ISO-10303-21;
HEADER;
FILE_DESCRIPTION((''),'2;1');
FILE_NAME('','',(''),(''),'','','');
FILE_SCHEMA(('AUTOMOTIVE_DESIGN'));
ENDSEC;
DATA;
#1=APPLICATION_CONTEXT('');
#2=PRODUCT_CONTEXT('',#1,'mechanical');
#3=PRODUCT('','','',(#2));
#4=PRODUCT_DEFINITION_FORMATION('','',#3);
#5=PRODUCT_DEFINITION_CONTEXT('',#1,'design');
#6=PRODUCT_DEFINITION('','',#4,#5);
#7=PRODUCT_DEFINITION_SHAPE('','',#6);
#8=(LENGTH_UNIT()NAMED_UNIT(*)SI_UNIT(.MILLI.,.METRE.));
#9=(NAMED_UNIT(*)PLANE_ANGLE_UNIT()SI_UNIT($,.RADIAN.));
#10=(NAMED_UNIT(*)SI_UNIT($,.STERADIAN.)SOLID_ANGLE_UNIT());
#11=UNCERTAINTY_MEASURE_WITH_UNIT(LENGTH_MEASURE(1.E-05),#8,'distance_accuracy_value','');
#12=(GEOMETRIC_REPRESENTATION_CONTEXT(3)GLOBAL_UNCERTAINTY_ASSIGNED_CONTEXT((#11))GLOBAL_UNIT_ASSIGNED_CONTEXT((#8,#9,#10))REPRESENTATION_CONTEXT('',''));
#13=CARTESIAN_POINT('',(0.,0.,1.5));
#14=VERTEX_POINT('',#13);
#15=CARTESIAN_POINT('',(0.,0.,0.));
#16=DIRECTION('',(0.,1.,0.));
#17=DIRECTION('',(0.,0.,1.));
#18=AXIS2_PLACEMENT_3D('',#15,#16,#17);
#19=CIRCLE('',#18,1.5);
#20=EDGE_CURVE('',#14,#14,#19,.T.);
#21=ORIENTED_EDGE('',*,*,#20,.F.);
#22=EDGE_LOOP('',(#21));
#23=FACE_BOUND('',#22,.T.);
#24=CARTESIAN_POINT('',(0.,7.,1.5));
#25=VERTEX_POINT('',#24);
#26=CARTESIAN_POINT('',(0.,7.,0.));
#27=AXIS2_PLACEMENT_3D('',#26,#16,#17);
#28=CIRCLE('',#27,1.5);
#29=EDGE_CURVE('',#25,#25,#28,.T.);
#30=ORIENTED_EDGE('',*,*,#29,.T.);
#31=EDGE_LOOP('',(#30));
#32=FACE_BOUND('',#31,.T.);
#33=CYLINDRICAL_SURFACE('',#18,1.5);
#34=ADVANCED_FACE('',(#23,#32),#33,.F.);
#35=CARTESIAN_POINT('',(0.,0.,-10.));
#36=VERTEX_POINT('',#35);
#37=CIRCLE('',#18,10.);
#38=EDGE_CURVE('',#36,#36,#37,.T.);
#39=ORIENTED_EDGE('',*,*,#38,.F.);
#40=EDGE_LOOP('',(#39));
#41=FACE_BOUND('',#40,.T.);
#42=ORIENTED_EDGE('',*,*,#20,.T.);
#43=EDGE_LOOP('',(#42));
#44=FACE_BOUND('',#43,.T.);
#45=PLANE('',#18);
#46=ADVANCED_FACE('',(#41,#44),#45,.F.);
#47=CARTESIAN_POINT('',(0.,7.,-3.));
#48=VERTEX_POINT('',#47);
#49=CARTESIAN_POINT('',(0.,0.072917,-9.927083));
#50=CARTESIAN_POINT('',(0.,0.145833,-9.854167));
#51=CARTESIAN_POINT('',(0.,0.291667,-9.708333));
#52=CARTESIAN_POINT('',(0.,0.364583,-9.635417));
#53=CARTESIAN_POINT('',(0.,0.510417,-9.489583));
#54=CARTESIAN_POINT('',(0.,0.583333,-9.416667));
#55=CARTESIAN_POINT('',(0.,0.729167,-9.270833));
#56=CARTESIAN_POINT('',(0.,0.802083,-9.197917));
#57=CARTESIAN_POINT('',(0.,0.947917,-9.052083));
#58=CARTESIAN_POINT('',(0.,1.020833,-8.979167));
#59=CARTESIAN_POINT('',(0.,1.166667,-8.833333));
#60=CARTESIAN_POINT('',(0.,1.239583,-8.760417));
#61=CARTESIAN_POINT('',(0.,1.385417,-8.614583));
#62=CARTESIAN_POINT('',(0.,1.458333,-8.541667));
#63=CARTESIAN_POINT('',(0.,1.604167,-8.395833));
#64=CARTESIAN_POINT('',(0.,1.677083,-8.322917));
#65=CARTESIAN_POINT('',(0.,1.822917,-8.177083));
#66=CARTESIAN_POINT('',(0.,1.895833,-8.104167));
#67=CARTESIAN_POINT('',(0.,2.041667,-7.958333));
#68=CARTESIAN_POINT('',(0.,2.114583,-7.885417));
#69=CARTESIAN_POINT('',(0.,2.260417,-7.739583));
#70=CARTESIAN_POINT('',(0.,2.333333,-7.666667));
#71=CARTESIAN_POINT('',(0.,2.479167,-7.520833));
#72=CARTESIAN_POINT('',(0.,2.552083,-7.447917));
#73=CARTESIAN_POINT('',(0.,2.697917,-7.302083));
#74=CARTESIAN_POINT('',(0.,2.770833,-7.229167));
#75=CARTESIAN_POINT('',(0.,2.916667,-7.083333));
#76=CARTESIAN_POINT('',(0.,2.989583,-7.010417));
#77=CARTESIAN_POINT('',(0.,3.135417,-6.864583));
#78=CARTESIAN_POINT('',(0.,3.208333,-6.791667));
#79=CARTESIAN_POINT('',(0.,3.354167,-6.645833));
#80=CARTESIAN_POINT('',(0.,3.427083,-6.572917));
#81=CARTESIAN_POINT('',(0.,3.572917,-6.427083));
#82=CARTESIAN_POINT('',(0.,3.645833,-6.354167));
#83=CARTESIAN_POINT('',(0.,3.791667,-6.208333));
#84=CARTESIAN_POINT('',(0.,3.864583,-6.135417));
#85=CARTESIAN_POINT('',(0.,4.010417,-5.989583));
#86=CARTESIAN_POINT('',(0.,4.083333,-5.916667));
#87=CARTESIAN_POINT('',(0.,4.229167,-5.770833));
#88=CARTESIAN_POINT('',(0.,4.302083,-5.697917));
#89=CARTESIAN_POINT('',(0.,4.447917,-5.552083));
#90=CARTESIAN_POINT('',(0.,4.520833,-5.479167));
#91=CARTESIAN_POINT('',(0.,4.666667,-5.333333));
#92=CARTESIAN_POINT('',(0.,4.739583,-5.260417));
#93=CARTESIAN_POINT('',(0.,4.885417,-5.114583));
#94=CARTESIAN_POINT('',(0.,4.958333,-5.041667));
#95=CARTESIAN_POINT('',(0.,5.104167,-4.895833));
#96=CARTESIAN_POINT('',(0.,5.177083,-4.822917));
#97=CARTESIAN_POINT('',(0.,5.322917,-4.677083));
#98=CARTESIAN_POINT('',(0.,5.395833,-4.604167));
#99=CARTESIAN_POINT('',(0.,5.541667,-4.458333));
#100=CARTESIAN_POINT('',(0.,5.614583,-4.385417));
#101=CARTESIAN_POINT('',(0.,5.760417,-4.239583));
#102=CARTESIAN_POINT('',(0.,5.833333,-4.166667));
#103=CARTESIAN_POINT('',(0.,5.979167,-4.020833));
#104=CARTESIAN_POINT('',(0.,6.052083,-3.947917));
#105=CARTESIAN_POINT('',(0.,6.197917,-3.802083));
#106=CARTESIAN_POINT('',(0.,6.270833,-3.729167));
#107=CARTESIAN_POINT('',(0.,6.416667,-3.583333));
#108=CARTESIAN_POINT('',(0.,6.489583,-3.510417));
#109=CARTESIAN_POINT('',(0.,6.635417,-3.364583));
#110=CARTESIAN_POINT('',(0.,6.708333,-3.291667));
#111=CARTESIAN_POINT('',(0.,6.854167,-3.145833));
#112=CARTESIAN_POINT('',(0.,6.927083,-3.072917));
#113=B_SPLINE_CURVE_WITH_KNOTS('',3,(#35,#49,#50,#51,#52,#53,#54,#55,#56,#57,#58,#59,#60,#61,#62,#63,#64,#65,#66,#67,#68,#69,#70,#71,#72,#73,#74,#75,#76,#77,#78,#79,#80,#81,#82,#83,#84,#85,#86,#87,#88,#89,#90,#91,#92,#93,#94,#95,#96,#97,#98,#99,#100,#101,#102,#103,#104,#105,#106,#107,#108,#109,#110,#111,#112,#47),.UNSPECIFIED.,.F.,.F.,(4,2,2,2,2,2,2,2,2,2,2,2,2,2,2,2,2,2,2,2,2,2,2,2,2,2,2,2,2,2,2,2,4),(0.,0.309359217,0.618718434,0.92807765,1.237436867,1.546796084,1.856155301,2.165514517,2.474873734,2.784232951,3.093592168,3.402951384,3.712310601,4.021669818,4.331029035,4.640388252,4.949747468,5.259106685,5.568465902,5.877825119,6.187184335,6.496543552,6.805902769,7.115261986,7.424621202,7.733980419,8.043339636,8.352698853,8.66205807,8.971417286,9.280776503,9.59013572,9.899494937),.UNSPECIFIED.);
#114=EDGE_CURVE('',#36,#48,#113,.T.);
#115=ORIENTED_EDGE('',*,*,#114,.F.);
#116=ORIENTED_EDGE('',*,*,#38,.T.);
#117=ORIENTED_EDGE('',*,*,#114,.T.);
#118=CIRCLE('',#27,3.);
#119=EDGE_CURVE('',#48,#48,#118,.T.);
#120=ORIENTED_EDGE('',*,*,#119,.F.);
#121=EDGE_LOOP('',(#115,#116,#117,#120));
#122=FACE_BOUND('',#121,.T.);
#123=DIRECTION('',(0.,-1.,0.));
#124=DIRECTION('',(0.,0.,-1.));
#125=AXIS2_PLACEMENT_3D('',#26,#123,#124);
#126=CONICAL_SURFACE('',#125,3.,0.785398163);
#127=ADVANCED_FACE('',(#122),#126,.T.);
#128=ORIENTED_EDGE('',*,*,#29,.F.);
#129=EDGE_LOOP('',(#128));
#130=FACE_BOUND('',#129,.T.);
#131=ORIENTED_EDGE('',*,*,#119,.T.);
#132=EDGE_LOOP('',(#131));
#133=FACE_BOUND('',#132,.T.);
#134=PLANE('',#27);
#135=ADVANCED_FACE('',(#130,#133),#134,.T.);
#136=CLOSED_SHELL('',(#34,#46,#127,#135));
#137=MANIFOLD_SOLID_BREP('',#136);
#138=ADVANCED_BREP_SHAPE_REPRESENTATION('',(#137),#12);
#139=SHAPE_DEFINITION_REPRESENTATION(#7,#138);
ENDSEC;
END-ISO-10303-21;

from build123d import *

# Parameters (mm, degrees)
SKETCH1_R           = 10
BOSS_EXTRUDE1_DEPTH = 7
CHAMFER1_SIZE       = 7
SKETCH2_R           = 1.5
CUT_EXTRUDE1_DEPTH  = 16.779733838


with BuildPart() as part:
    # Sketch1 → Boss-Extrude1 (new body)
    with BuildSketch(Plane(origin=(0, 0, 0), x_dir=(1, 0, 0), z_dir=(0, 1, 0))):
        with Locations(Location((0, 0, 0), (0, 0, 270))):
            Circle(SKETCH1_R)
    extrude(amount=BOSS_EXTRUDE1_DEPTH)

    # Chamfer1
    chamfer1_edges = [part.edges().sort_by_distance(p)[0] for p in [
        (0, 7, -10),
    ]]
    chamfer(chamfer1_edges, length=CHAMFER1_SIZE - 0.0001)  # a hair under: the kernel refuses the full size

    # Sketch2 → Cut-Extrude1 (cut, through all)
    with BuildSketch(Plane(origin=(0, 7, 0), x_dir=(1, 0, 0), z_dir=(0, 1, 0))):
        with Locations(Location((0, 0, 0), (0, 0, 270))):
            Circle(SKETCH2_R)
    extrude(amount=-CUT_EXTRUDE1_DEPTH, mode=Mode.SUBTRACT)


solid = part.part
